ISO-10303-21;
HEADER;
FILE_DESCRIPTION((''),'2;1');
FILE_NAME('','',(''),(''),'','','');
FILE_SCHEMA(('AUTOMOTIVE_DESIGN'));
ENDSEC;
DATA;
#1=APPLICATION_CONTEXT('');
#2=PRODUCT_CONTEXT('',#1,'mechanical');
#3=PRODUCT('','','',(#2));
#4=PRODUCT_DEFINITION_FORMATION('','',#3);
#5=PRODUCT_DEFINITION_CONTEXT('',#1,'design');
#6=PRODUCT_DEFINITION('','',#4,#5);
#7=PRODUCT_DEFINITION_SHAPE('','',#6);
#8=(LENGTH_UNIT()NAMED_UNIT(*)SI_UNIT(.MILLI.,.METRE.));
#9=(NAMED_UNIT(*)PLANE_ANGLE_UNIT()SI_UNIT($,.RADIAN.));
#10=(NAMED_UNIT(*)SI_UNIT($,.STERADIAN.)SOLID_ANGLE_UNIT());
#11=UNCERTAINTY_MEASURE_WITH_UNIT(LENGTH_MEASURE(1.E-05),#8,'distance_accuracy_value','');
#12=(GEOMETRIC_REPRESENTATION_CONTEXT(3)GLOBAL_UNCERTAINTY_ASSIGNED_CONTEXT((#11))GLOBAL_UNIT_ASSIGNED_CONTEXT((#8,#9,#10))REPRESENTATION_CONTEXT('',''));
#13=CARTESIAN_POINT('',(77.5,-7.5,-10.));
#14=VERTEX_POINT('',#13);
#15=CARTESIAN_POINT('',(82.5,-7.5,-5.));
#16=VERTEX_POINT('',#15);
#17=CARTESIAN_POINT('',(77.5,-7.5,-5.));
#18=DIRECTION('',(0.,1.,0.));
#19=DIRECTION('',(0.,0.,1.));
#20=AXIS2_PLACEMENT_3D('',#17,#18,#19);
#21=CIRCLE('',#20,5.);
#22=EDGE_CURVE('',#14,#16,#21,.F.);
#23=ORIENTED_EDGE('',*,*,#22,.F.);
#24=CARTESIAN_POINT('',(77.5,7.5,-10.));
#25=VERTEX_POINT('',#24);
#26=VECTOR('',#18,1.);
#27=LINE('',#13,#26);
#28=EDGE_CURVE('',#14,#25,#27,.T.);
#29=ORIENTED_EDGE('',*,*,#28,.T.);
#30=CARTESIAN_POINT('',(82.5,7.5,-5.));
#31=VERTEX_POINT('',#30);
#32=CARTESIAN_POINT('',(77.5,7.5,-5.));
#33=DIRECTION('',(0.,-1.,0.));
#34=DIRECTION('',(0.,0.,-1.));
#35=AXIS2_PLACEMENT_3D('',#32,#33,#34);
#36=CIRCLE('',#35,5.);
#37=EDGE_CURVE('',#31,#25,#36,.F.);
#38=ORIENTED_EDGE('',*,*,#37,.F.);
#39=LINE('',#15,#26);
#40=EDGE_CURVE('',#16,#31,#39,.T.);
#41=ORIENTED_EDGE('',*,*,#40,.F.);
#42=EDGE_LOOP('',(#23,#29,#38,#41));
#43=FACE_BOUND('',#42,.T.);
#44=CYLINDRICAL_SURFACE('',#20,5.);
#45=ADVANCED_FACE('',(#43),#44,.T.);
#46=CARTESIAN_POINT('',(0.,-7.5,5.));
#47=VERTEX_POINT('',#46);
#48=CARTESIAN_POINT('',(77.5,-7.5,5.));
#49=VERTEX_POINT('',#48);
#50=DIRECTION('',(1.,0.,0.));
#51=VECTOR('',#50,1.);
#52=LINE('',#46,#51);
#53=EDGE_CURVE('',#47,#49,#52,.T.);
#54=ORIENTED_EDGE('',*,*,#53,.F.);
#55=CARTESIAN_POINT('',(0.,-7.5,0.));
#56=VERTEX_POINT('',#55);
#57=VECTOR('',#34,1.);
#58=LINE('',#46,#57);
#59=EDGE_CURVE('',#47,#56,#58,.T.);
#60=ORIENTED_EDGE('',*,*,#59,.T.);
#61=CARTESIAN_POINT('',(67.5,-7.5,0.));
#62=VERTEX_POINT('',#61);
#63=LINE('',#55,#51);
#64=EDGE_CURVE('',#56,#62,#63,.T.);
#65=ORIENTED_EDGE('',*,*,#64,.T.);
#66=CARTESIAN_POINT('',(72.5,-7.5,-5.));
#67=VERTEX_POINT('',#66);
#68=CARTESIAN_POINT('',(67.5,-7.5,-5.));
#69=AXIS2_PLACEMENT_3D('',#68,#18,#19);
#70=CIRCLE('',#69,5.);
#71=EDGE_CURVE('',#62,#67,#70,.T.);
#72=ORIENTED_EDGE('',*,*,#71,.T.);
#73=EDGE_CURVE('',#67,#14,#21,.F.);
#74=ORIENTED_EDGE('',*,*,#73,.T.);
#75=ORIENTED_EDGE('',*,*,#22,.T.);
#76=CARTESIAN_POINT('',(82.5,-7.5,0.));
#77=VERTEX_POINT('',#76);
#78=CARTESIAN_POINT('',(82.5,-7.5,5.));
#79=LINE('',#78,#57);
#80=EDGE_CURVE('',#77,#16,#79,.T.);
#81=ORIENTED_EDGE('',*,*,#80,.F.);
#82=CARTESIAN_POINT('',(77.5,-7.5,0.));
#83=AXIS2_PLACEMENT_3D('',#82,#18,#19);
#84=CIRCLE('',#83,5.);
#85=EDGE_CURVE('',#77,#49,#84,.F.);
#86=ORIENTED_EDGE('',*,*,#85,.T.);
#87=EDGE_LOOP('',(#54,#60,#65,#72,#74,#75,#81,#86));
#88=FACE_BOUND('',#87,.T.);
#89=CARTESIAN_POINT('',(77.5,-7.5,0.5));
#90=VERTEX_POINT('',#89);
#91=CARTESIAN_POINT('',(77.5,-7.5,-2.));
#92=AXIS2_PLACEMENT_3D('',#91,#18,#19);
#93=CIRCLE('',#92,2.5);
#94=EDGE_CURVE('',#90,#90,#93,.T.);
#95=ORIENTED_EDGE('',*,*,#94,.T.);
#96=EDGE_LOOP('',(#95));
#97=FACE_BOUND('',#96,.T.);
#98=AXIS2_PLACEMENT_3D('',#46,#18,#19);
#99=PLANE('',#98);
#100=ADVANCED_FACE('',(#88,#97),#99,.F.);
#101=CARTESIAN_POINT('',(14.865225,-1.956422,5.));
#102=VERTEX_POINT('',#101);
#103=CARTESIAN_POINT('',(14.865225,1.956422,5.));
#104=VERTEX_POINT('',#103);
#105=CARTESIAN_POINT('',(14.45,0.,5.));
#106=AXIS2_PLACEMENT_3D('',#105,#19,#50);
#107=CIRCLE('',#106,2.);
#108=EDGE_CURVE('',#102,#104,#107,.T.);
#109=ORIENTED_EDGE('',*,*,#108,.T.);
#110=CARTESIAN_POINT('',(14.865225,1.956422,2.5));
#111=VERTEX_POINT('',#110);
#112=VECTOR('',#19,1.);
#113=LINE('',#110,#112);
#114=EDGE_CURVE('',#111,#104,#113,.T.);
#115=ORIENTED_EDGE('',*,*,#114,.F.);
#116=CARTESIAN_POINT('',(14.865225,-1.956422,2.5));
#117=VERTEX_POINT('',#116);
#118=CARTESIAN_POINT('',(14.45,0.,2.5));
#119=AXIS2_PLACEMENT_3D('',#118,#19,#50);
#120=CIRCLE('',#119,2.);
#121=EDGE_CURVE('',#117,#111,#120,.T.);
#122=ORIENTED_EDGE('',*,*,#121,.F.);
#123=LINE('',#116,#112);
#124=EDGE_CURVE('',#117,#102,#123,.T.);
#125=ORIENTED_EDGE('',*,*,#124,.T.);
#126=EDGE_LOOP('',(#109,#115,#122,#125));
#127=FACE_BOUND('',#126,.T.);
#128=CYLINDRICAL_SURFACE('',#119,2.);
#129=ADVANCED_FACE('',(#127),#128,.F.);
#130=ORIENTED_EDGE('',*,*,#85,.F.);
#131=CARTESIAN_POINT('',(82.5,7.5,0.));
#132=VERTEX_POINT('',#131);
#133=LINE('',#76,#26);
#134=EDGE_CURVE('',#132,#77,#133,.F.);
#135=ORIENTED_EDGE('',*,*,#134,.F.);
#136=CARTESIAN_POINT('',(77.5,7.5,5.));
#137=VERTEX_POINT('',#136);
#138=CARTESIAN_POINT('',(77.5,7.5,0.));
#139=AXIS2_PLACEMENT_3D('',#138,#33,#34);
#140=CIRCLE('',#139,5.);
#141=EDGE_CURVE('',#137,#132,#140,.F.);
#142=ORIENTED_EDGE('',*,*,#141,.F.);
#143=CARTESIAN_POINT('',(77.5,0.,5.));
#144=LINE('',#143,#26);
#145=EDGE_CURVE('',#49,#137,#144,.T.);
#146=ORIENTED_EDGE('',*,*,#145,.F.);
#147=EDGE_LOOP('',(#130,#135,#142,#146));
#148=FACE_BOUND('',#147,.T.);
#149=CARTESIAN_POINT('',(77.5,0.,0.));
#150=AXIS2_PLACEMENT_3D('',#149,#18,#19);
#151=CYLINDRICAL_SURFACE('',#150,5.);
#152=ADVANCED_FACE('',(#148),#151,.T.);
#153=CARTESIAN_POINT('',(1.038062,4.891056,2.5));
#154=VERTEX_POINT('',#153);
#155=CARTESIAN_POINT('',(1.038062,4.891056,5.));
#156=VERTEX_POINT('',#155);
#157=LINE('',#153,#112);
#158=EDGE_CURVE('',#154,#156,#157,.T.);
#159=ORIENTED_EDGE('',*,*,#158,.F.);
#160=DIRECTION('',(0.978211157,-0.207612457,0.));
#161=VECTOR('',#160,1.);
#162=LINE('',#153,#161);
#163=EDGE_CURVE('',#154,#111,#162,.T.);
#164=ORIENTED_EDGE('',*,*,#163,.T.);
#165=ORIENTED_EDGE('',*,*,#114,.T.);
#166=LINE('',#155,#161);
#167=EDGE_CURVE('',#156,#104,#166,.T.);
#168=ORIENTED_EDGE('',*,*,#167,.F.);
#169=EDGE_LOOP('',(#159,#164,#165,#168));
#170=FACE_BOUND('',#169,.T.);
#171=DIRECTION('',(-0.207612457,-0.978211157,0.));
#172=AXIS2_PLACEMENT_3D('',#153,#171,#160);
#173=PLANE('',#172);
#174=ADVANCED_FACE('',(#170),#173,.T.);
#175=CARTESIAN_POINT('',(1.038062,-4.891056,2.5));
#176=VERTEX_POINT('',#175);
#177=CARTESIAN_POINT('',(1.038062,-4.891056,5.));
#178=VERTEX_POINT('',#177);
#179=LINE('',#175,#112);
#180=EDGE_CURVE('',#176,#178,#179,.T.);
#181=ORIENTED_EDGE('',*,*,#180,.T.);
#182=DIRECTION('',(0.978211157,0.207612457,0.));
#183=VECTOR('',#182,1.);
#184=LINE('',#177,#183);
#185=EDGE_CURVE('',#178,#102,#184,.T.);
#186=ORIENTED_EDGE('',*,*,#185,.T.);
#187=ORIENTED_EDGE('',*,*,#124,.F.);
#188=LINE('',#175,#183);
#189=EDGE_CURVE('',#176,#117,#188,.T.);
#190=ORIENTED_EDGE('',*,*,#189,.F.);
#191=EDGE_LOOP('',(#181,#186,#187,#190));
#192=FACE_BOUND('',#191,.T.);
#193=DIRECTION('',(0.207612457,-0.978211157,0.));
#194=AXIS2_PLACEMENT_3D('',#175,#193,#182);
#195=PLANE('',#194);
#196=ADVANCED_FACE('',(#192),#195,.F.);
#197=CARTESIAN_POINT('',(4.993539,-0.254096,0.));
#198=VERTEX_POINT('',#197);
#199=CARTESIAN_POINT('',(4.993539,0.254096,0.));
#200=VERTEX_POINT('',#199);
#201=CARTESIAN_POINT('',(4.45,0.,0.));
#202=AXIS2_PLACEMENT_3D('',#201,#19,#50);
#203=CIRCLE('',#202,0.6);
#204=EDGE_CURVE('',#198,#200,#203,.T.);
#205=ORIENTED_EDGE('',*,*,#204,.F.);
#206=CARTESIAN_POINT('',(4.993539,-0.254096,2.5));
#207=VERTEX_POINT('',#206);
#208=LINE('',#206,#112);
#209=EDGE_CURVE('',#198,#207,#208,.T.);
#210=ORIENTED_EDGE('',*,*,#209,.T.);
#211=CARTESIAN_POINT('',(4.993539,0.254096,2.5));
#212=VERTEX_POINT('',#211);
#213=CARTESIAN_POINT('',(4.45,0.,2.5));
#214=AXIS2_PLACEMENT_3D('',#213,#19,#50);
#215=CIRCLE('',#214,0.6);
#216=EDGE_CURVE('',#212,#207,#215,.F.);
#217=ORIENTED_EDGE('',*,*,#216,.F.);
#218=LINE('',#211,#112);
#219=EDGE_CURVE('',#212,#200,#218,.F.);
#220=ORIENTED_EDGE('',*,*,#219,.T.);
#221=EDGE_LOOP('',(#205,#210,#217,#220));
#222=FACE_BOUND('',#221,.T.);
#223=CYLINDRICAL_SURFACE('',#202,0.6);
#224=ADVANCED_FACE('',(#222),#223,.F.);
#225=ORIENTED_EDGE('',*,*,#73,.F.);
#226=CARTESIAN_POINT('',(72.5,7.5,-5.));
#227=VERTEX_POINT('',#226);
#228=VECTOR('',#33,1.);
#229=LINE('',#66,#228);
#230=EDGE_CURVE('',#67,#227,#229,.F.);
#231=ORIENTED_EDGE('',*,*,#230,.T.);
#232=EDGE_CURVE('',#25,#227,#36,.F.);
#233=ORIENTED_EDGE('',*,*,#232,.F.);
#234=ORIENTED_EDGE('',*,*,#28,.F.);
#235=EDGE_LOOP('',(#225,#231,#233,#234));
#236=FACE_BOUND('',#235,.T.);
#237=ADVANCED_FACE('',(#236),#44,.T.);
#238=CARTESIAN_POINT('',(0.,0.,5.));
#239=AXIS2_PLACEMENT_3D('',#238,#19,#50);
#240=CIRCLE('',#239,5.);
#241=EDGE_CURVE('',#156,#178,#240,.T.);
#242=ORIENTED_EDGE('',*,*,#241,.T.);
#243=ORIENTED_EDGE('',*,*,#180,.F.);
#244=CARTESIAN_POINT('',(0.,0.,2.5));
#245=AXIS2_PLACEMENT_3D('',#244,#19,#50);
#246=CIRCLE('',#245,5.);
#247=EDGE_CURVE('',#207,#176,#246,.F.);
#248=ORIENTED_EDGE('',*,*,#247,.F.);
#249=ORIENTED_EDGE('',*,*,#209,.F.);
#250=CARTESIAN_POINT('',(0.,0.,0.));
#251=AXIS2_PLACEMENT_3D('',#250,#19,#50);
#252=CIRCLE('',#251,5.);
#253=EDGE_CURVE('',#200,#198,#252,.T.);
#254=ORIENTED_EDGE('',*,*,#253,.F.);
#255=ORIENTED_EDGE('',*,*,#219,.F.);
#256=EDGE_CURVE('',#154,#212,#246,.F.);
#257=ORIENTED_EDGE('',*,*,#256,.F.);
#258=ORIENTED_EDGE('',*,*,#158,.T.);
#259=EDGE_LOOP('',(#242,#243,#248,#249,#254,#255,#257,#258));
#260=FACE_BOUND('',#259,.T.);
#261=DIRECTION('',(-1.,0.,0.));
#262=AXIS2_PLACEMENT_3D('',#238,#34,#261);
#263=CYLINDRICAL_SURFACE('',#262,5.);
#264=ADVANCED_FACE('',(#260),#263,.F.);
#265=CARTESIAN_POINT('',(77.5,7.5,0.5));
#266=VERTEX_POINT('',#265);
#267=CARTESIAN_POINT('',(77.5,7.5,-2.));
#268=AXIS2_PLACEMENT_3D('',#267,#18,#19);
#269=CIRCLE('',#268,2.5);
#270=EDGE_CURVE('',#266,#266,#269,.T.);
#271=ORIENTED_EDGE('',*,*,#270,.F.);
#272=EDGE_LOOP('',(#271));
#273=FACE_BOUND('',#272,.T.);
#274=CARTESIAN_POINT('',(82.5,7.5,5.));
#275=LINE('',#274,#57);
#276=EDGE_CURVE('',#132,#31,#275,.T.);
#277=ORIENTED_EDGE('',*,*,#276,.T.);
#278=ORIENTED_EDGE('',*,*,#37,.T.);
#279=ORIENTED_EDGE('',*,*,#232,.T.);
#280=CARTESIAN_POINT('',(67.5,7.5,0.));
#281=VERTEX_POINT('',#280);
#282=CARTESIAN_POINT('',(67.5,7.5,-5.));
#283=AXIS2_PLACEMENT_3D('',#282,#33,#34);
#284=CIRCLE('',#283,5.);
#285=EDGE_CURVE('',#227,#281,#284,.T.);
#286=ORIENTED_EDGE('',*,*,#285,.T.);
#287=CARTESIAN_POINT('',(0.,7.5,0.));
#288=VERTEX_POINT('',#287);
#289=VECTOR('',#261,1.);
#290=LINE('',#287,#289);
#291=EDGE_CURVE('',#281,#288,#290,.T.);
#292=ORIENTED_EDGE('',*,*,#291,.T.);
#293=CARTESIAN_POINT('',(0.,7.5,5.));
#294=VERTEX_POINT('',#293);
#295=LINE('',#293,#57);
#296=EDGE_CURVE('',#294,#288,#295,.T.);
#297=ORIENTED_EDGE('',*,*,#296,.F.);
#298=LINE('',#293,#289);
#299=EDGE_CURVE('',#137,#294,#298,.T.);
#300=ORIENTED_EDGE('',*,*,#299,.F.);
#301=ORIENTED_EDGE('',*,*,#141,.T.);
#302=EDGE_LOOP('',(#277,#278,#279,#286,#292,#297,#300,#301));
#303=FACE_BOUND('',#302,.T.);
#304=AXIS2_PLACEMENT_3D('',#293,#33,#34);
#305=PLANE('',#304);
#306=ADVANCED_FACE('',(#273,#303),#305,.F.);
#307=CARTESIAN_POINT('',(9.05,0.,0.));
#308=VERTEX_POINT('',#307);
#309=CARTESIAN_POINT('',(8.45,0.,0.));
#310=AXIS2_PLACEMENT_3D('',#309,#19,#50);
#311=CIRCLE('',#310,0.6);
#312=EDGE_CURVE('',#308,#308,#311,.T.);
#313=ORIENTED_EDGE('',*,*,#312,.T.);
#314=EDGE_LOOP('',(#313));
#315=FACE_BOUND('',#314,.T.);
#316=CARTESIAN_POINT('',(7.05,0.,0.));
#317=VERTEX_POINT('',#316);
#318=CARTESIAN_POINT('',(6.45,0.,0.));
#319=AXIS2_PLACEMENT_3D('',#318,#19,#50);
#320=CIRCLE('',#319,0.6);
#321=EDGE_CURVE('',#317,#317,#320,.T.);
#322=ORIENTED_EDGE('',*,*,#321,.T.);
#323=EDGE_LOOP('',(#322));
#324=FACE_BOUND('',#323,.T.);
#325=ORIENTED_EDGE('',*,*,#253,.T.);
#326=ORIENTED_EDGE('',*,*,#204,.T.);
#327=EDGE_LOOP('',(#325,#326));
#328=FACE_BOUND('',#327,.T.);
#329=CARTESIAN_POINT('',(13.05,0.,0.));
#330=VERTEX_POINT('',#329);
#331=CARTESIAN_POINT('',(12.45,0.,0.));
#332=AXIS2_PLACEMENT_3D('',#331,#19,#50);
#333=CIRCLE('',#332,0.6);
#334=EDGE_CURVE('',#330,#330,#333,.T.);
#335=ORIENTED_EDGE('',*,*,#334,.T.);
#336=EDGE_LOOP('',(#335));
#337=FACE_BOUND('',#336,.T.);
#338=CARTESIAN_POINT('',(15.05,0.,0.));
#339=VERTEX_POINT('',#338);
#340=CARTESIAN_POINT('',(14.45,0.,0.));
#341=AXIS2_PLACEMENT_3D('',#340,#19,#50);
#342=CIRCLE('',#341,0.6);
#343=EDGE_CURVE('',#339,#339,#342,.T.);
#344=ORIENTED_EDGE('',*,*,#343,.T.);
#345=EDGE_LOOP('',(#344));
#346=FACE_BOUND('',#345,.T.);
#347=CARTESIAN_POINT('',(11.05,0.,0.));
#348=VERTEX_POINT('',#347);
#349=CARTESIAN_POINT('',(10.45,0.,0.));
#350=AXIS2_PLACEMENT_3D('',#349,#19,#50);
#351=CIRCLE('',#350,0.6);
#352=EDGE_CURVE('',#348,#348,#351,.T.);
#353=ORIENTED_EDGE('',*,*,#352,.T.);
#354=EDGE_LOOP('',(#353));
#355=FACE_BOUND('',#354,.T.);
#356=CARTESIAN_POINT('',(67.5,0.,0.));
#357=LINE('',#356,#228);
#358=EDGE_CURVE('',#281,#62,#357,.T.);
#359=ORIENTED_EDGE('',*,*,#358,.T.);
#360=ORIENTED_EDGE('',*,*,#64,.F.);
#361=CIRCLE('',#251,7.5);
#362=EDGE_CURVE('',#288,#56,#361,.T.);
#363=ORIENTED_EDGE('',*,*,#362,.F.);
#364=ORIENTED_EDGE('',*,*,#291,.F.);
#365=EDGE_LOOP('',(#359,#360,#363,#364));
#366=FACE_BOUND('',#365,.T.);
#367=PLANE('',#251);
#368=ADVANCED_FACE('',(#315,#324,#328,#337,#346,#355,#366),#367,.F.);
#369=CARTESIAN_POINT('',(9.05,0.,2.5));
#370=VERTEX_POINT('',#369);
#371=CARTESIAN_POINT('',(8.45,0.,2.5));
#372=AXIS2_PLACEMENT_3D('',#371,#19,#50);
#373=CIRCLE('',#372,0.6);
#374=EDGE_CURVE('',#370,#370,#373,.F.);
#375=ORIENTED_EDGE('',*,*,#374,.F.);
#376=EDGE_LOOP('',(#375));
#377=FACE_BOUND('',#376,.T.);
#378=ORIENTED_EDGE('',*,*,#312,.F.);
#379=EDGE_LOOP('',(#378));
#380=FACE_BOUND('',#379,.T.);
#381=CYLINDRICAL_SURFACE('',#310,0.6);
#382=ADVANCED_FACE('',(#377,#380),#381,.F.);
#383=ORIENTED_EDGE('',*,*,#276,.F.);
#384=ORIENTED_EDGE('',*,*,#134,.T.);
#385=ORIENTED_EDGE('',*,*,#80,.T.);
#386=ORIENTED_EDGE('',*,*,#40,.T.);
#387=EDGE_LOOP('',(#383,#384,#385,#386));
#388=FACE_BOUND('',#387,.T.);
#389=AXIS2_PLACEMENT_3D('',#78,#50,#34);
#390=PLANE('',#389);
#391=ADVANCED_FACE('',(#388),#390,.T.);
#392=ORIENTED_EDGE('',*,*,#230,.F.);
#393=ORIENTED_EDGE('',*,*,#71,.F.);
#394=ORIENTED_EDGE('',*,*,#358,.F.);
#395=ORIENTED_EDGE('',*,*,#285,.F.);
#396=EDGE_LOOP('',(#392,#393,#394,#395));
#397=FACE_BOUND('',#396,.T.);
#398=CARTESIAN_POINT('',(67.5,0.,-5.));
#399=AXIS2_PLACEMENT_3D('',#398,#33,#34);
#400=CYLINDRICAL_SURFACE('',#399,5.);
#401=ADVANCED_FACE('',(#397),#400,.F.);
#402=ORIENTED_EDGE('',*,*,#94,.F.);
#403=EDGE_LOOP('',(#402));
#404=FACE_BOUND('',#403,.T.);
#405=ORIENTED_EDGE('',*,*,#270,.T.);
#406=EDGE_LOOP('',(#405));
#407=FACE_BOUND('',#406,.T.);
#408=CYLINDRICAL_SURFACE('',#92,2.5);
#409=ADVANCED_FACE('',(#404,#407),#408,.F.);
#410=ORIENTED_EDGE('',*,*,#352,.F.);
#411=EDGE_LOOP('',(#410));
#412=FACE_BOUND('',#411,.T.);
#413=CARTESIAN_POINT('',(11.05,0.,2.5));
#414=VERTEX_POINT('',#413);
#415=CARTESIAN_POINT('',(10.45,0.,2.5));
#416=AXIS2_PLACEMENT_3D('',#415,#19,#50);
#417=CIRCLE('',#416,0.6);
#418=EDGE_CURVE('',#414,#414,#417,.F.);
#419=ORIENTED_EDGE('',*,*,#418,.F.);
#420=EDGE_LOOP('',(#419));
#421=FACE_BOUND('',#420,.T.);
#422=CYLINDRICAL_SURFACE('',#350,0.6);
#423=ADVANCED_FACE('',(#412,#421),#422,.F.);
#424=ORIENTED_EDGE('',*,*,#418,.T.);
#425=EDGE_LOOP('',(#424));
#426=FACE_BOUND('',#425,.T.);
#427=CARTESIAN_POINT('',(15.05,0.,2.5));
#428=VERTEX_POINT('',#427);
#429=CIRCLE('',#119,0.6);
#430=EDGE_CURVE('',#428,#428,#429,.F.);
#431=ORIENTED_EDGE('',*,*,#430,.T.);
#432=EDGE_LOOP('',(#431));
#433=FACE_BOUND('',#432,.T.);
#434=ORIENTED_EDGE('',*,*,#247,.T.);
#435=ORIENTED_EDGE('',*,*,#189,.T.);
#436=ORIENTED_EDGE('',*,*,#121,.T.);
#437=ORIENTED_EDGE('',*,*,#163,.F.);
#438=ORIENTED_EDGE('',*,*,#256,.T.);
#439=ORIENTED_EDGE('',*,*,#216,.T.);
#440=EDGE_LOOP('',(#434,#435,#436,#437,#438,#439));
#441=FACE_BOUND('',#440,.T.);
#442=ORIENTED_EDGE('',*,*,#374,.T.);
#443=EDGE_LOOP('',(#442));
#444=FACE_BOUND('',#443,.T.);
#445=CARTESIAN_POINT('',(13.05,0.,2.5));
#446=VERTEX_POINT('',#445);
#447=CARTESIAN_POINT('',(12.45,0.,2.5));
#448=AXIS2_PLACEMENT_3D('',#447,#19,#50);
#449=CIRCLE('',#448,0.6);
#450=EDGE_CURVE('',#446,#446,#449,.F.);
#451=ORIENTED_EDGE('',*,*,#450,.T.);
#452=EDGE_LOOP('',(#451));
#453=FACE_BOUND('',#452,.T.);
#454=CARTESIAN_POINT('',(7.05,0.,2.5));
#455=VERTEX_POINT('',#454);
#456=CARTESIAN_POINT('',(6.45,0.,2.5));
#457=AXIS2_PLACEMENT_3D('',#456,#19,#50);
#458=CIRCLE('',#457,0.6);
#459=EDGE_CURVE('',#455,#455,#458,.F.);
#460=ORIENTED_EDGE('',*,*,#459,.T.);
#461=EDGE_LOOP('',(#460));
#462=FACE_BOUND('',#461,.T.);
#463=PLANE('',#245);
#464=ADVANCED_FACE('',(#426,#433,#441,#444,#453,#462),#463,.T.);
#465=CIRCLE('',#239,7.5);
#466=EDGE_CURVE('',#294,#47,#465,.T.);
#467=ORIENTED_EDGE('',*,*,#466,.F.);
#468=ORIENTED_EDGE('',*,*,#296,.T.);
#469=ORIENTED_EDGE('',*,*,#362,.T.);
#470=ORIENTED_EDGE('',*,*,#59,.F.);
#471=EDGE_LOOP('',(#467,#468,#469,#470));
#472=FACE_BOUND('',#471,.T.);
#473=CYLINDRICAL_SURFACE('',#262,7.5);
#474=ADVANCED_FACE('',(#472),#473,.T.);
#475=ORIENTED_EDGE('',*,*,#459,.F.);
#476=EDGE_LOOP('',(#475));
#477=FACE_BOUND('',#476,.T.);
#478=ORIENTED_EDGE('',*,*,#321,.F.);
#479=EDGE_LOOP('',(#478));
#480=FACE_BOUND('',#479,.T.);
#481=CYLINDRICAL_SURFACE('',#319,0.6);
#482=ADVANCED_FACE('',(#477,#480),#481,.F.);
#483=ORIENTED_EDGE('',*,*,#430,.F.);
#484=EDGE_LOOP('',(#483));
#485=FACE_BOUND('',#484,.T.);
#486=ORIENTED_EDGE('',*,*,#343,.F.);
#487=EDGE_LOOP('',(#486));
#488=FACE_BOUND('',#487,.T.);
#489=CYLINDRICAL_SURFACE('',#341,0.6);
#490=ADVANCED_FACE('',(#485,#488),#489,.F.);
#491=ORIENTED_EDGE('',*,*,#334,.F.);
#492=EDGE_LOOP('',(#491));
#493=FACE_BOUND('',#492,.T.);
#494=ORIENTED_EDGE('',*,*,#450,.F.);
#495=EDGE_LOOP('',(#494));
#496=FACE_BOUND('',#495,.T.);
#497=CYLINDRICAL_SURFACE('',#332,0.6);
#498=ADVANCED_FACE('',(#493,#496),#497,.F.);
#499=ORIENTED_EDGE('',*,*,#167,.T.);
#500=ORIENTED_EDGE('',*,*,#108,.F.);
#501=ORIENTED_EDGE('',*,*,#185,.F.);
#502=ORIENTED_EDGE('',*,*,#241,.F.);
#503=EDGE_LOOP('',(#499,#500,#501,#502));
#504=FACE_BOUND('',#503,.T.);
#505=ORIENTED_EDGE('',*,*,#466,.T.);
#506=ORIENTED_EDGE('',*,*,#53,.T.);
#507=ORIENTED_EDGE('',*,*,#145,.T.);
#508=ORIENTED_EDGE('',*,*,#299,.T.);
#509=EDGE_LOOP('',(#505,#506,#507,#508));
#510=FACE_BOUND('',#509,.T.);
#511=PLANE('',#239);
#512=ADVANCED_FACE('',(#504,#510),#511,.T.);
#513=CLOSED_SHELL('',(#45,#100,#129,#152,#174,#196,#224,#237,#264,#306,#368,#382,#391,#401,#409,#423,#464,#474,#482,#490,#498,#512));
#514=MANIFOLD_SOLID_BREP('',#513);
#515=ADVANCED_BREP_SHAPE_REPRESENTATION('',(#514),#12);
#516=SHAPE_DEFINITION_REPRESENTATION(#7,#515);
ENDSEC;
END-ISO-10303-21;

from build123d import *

# Parameters (mm, degrees)
SKETCH1_R           = 5
SKETCH1_R_2         = 2.5
BOSS_EXTRUDE1_DEPTH = 5
SKETCH2_R           = 0.6
CUT_EXTRUDE1_DEPTH  = 83.990963363
CUT_EXTRUDE2_START  = -2.5
CUT_EXTRUDE2_DEPTH  = 2.5
SKETCH4_W           = 10
SKETCH4_H           = 15
BOSS_EXTRUDE2_DEPTH = 15
SKETCH5_R           = 2.5
CUT_EXTRUDE3_DEPTH  = 15
FILLET1_R           = 5


with BuildPart() as part:
    # Sketch1 → Boss-Extrude1 (new body)
    with BuildSketch(Plane.XY):
        with BuildLine():
            Line((0, 7.5), (75, 7.5))
            ThreePointArc((75, 7.5), (82.5, 0), (75, -7.5))
            Line((75, -7.5), (0, -7.5))
            ThreePointArc((0, -7.5), (-7.5, 0), (0, 7.5))
        make_face()
        Circle(SKETCH1_R, mode=Mode.SUBTRACT)
        with Locations((75, 0)):
            Circle(SKETCH1_R_2, mode=Mode.SUBTRACT)
    extrude(amount=BOSS_EXTRUDE1_DEPTH)

    # Sketch2 → Cut-Extrude1 (cut, through all)
    with BuildSketch(Plane.XY.offset(5)):
        with Locations((4.45, 0)):
            Circle(SKETCH2_R)
        with Locations((6.45, 0)):
            Circle(SKETCH2_R)
        with Locations((8.45, 0)):
            Circle(SKETCH2_R)
        with Locations((10.45, 0)):
            Circle(SKETCH2_R)
        with Locations((12.45, 0)):
            Circle(SKETCH2_R)
        with Locations((14.45, 0)):
            Circle(SKETCH2_R)
    extrude(amount=-CUT_EXTRUDE1_DEPTH, mode=Mode.SUBTRACT)

    # Sketch3 → Cut-Extrude2 (cut)
    with BuildSketch(Plane.XY.offset(5).offset(CUT_EXTRUDE2_START)):
        with BuildLine():
            Line((14.865224913, 1.956422314), (1.038062284, 4.891055785))
            ThreePointArc((1.038062284, 4.891055785), (5, 0), (1.038062284, -4.891055785))
            Line((1.038062284, -4.891055785), (14.865224913, -1.956422314))
            ThreePointArc((14.865224913, -1.956422314), (16.45, 0), (14.865224913, 1.956422314))
        make_face()
    extrude(amount=CUT_EXTRUDE2_DEPTH, mode=Mode.SUBTRACT)

    # Sketch4 → Boss-Extrude2 (add)
    with BuildSketch(Plane(origin=(0, 7.5, 0), x_dir=(1, 0, 0), z_dir=(0, 1, 0))):
        with Locations((77.5, 2.5)):
            Rectangle(SKETCH4_W, SKETCH4_H)
    extrude(amount=-BOSS_EXTRUDE2_DEPTH)

    # Sketch5 → Cut-Extrude3 (cut)
    with BuildSketch(Plane(origin=(0, 7.5, 0), x_dir=(1, 0, 0), z_dir=(0, 1, 0))):
        with Locations(Location((77.5, 2, 0), (0, 0, 270))):
            Circle(SKETCH5_R)
    extrude(amount=-CUT_EXTRUDE3_DEPTH, mode=Mode.SUBTRACT)

    # Fillet1
    fillet1_edges = [part.edges().sort_by_distance(p)[0] for p in [
        (82.5, 0, -10),
        (72.5, 0, -10),
        (72.5, 0, 0),
        (82.5, -3.75, 5),
    ]]
    fillet(fillet1_edges, radius=FILLET1_R - 0.0001)  # a hair under: the kernel refuses the full size


solid = part.part
